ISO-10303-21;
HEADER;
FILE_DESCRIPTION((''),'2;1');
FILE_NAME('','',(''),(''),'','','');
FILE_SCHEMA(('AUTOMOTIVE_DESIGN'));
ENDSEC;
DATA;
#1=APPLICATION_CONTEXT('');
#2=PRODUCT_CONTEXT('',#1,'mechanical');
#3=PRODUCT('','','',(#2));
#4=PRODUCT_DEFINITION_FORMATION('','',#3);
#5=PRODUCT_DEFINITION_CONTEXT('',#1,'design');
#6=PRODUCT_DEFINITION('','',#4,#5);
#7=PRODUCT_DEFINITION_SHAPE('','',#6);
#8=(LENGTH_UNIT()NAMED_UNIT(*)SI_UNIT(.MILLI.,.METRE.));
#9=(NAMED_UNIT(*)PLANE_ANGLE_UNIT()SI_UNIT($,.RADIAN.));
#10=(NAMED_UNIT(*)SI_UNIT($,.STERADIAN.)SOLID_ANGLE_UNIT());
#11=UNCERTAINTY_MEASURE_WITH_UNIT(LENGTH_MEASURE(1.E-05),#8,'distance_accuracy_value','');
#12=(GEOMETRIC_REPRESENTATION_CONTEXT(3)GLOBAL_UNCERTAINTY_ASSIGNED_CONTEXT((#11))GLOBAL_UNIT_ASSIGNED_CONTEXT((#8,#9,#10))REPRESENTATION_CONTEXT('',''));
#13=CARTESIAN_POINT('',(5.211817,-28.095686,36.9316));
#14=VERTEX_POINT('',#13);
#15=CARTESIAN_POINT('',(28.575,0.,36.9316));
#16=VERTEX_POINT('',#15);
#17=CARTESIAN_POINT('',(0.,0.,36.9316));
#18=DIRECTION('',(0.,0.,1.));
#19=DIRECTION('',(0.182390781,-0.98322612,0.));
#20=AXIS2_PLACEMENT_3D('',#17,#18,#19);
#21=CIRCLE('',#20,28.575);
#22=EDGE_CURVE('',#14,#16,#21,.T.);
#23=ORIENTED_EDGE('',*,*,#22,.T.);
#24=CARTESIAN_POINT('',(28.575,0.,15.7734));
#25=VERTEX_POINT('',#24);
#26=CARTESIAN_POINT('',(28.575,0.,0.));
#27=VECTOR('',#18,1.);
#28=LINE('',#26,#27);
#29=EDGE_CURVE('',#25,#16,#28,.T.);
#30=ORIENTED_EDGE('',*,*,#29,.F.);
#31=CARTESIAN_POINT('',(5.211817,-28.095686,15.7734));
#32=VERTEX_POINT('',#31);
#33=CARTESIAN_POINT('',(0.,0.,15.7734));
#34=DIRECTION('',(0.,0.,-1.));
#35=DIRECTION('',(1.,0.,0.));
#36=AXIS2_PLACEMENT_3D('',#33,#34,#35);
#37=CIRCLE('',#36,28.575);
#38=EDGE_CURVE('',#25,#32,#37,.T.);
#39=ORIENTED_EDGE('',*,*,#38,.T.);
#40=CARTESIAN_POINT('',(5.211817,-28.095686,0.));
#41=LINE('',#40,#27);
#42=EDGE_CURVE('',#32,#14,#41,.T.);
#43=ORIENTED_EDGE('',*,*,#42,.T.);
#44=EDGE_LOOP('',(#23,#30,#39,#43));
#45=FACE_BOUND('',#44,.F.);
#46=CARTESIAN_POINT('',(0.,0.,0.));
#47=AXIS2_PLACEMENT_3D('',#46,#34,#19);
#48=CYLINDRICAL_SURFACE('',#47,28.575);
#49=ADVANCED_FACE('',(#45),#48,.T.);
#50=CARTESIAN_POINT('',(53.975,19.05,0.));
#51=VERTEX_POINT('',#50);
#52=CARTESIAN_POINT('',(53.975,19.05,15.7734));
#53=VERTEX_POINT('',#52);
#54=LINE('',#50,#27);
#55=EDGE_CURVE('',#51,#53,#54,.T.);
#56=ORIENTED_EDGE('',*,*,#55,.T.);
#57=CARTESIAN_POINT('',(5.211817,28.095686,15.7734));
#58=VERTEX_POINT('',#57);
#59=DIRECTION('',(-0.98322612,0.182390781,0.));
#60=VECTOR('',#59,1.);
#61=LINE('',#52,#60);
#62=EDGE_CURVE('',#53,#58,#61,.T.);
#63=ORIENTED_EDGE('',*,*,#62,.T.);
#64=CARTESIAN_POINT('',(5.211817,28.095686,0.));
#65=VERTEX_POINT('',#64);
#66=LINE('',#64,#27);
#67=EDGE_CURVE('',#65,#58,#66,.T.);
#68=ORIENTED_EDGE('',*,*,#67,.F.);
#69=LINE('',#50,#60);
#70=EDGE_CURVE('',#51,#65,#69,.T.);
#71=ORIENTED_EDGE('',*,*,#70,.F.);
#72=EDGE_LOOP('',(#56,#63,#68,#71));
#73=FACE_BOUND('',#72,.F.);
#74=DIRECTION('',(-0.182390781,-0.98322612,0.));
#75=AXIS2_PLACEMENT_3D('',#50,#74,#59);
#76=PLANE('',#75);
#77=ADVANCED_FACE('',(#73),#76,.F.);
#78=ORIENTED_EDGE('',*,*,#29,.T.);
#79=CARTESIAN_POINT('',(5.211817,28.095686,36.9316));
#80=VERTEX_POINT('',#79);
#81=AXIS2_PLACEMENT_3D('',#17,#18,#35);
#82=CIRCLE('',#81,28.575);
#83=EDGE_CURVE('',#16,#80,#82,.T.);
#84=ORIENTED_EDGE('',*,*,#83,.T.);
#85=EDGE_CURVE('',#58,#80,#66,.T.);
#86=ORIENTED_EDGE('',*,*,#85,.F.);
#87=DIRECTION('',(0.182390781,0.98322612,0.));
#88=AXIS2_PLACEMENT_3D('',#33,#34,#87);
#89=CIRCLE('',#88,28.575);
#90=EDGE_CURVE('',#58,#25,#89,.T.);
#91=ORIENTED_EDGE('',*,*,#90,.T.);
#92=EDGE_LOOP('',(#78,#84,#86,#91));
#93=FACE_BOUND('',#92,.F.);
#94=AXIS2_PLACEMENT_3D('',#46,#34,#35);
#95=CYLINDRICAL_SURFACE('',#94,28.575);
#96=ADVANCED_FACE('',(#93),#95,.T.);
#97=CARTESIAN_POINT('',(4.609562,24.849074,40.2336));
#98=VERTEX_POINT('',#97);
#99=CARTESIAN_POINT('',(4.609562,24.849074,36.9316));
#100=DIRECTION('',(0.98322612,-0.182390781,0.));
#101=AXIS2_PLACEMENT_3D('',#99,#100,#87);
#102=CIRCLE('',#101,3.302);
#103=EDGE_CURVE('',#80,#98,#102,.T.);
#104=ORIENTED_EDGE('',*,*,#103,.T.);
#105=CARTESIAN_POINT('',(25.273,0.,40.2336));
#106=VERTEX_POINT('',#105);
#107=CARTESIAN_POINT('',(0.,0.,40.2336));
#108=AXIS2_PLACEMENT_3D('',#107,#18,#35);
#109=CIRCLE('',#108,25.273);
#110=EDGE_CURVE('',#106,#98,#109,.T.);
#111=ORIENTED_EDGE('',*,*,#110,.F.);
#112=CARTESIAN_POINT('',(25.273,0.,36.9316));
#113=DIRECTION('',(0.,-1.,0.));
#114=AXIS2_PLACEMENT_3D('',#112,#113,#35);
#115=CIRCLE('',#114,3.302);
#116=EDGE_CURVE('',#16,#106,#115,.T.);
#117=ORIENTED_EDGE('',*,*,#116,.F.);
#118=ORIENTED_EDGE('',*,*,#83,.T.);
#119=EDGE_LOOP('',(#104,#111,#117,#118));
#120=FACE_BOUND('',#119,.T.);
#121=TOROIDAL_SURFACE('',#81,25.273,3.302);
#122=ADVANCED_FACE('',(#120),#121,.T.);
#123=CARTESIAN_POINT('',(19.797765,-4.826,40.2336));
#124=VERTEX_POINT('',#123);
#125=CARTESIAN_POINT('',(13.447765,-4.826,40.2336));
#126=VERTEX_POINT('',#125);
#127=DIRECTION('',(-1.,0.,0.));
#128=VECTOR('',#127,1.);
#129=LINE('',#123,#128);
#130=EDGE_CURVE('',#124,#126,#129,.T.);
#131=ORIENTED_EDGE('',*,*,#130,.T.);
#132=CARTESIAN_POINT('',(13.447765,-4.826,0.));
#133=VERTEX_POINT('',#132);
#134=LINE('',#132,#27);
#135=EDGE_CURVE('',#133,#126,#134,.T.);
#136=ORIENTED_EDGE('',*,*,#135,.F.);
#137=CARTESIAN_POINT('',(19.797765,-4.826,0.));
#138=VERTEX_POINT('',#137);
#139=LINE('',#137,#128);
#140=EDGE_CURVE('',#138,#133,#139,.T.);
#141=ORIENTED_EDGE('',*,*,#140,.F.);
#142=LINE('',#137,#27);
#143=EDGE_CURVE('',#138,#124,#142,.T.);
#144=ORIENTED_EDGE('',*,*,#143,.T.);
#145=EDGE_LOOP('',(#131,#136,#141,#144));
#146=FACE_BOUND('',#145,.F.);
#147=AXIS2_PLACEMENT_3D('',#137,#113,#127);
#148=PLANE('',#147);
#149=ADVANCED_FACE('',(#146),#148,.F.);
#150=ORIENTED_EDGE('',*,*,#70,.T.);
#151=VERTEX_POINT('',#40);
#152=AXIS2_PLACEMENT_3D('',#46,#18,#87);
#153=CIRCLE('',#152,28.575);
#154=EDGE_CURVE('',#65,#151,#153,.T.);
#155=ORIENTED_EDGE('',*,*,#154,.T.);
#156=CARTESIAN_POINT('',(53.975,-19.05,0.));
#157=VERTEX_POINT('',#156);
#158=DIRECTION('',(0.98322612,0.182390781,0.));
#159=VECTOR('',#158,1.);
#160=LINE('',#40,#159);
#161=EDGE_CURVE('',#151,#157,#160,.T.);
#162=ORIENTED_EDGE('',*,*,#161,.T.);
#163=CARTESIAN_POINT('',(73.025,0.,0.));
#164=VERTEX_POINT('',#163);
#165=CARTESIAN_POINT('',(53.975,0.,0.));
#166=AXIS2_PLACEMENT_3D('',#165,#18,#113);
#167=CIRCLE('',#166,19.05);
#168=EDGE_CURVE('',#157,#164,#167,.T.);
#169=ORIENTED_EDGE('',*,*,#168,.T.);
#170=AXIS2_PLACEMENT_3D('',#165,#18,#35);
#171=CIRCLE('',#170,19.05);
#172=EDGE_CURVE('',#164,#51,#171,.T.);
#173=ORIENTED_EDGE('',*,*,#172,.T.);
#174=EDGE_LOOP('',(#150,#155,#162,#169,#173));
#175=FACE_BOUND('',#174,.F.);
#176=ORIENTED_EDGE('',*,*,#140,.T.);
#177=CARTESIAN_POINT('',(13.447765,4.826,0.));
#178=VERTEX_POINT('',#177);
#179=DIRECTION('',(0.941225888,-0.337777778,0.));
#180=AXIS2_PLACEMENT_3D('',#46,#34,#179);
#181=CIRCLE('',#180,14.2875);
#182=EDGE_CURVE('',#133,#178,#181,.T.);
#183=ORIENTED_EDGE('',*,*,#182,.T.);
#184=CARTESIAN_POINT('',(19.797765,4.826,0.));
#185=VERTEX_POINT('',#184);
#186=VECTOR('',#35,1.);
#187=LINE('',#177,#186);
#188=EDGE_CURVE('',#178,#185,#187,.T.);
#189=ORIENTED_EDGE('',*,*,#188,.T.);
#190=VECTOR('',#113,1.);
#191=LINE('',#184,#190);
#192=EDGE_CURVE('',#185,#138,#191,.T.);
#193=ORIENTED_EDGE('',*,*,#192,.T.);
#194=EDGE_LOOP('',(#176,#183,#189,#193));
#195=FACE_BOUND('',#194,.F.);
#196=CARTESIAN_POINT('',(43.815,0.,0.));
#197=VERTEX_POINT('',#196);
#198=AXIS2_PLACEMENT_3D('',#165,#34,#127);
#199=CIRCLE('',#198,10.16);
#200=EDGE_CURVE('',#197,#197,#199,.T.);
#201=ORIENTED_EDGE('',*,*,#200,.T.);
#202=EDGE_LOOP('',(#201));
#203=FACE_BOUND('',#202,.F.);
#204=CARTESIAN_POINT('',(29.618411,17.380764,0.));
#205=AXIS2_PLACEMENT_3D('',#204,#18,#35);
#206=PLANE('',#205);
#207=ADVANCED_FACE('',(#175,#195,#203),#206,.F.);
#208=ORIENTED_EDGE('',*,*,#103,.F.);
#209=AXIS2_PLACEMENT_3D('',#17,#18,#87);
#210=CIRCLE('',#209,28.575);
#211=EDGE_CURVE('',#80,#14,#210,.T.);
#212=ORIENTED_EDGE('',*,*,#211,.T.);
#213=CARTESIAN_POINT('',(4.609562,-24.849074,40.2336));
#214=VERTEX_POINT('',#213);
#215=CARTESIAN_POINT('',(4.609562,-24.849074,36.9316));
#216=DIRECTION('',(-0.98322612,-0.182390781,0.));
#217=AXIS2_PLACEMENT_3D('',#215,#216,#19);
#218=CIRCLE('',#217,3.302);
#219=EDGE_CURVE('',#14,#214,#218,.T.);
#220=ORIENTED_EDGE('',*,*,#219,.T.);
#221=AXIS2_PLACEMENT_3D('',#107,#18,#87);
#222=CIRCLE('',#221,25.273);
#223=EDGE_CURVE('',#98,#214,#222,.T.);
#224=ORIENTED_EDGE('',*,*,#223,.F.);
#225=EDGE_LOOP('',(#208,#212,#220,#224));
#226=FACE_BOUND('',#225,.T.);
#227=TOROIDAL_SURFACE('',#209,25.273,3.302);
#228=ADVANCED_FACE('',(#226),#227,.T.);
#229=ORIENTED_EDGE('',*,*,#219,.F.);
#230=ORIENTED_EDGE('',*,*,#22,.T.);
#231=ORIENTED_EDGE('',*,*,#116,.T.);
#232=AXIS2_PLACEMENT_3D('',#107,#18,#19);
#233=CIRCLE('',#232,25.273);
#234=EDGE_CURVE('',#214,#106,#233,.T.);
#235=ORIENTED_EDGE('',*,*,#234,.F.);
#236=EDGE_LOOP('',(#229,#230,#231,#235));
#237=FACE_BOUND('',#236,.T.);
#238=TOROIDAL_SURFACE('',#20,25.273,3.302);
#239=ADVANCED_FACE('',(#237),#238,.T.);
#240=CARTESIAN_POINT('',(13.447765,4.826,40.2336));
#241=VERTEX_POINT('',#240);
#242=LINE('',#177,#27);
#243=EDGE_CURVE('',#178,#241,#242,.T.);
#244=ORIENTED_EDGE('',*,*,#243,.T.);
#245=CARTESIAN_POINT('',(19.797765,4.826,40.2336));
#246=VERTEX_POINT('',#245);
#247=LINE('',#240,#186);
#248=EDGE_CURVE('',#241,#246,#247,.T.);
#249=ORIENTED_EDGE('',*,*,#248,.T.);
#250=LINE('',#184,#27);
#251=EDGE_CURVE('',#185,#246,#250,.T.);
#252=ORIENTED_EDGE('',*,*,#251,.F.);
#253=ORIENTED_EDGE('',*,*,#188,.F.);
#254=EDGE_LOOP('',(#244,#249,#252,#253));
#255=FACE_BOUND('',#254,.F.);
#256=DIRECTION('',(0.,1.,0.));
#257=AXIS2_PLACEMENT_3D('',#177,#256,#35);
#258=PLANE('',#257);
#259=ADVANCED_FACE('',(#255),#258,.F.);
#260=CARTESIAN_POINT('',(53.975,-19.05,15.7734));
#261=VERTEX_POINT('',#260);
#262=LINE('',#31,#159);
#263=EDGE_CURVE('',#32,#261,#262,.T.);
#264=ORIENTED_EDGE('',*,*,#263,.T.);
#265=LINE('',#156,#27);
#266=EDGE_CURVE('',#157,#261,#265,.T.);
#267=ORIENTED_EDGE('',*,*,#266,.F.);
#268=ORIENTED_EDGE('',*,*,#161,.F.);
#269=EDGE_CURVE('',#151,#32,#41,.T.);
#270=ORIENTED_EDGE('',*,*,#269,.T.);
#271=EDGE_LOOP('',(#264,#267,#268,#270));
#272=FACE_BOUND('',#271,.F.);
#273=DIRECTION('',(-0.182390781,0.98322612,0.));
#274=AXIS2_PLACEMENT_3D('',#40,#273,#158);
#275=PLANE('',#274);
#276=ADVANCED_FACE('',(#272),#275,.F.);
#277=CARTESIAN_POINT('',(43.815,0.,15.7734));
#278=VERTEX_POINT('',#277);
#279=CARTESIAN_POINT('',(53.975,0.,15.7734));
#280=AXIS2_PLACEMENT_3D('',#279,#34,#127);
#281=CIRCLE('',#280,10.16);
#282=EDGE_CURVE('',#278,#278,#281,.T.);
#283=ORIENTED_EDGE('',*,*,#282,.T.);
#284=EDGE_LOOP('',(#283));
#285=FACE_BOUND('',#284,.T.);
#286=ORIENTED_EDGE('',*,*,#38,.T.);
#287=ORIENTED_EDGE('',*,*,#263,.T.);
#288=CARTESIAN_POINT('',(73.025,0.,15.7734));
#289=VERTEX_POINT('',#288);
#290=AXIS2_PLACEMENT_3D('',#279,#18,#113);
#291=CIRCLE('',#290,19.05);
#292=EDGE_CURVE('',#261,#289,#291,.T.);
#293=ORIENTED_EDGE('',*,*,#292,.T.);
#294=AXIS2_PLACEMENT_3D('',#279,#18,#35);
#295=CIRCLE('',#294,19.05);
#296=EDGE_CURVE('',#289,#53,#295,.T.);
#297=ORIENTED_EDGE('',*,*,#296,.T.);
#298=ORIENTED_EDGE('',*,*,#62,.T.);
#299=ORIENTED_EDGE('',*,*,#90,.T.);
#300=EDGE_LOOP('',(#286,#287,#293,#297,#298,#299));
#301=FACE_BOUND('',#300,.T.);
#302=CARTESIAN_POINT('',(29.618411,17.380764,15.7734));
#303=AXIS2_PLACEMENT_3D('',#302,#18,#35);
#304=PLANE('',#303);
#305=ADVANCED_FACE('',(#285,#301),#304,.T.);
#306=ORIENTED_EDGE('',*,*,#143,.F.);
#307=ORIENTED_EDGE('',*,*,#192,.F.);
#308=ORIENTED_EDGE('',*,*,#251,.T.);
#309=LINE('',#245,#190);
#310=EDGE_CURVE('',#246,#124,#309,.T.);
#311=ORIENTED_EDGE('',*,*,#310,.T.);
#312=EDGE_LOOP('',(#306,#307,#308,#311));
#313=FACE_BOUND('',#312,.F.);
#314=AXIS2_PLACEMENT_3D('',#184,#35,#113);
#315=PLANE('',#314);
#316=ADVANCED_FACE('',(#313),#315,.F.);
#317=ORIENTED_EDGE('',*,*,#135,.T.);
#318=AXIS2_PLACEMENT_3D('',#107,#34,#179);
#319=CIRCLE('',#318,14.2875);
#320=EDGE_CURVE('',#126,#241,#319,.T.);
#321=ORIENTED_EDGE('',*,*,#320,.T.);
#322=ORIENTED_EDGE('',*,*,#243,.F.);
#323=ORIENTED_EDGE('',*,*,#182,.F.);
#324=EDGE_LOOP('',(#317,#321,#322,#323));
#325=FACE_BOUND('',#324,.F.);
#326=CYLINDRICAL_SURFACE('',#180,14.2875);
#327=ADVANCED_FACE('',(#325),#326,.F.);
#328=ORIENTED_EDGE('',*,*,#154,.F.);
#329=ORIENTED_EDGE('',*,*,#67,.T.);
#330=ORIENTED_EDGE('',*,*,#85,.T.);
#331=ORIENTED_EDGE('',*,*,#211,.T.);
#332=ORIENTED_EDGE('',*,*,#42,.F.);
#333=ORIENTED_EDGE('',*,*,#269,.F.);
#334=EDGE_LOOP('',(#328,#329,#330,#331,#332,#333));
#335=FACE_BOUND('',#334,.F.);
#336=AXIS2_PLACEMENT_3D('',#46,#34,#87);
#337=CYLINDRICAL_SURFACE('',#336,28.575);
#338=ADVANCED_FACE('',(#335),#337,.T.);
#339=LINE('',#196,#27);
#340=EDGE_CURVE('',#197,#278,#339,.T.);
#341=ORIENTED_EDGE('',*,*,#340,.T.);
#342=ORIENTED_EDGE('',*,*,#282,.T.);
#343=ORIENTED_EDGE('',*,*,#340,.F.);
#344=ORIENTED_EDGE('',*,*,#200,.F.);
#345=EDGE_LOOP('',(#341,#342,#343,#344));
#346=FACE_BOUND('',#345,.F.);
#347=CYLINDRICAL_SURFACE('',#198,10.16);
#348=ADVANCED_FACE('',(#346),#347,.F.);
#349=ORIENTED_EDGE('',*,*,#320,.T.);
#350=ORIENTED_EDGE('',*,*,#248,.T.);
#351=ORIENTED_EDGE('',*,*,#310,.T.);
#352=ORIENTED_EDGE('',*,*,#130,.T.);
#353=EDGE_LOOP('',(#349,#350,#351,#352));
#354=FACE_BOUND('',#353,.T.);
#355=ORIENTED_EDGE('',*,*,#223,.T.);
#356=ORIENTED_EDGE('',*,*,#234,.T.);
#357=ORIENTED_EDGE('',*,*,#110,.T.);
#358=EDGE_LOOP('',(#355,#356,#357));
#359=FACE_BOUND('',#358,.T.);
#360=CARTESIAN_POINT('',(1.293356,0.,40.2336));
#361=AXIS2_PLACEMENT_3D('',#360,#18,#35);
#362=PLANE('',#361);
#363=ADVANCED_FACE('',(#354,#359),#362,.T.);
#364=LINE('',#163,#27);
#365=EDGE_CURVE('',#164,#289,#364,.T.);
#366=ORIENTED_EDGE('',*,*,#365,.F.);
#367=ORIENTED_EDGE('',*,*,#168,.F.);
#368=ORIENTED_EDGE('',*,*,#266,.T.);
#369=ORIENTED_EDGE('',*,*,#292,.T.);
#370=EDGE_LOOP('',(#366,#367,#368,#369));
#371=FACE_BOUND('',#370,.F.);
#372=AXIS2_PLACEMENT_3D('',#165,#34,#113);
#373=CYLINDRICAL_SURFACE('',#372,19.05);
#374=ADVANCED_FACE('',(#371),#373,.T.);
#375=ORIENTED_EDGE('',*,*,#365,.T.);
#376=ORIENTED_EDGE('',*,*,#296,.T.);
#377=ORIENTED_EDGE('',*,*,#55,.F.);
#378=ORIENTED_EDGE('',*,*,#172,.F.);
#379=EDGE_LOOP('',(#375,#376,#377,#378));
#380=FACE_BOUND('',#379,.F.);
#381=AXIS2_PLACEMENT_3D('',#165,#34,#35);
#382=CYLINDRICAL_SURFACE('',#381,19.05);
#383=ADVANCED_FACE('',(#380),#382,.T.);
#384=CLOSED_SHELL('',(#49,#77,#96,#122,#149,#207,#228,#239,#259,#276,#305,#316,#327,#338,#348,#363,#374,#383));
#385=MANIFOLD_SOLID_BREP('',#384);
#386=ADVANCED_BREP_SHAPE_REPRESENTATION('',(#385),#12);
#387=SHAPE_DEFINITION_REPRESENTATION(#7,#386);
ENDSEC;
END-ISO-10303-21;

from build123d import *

# Parameters (mm, degrees)
F1_DEPTH = 40.2336
F2_DEPTH = 15.7734
F3_R     = 3.302


# Not quite as in the source:
# - a feature names something its author has since deleted; it is built from what else it names


with BuildPart() as f1:
    # F0 (on Top) → F1 (new body)
    with BuildSketch(Plane.XY):
        with BuildLine():
            ThreePointArc((5.2118165727, -28.0956863773), (21.9710978739, -18.2702348977), (28.575, 0))
            ThreePointArc((28.575, 0), (21.9710978739, 18.2702348977), (5.2118165727, 28.0956863773))
            ThreePointArc((5.2118165727, 28.0956863773), (-28.575, 0), (5.2118165727, -28.0956863773))
        make_face()
        with BuildLine():
            ThreePointArc((13.4477648793, -4.826), (-14.2875, 0), (13.4477648793, 4.826))
            Line((13.4477648793, 4.826), (19.7977648793, 4.826))
            Line((19.7977648793, 4.826), (19.7977648793, 0))
            Line((19.7977648793, 0), (19.7977648793, -4.826))
            Line((19.7977648793, -4.826), (13.4477648793, -4.826))
        make_face(mode=Mode.SUBTRACT)
    extrude(amount=F1_DEPTH)

    # F0 (on Top) → F2 (join)
    with BuildSketch(Plane.XY):
        with BuildLine():
            ThreePointArc((5.2118165727, 28.0956863773), (21.9710978739, 18.2702348977), (28.575, 0))
            Line((28.575, 0), (34.925, 0))
            ThreePointArc((34.925, 0), (40.5046158184, 13.4703841816), (53.975, 19.05))
            Line((53.975, 19.05), (5.2118165727, 28.0956863773))
        make_face()
        with BuildLine():
            Line((34.925, 0), (28.575, 0))
            ThreePointArc((28.575, 0), (21.9710978739, -18.2702348977), (5.2118165727, -28.0956863773))
            Line((5.2118165727, -28.0956863773), (53.975, -19.05))
            ThreePointArc((53.975, -19.05), (40.5046158184, -13.4703841816), (34.925, 0))
        make_face()
        with BuildLine():
            ThreePointArc((53.975, 19.05), (40.5046158184, 13.4703841816), (34.925, 0))
            ThreePointArc((34.925, 0), (40.5046158184, -13.4703841816), (53.975, -19.05))
            ThreePointArc((53.975, -19.05), (67.4453841816, -13.4703841816), (73.025, 0))
            ThreePointArc((73.025, 0), (67.4453841816, 13.4703841816), (53.975, 19.05))
        make_face()
        with BuildLine():
            ThreePointArc((64.135, 0), (53.975, -10.16), (43.815, 0))
            ThreePointArc((43.815, 0), (53.975, 10.16), (64.135, 0))
        make_face(mode=Mode.SUBTRACT)
    extrude(amount=F2_DEPTH)

    # F3
    f3_edges = [f1.edges().sort_by_distance(p)[0] for p in [
        (-5.211817, 28.095686, 40.2336),
    ]]
    fillet(f3_edges, radius=F3_R)


solid = f1.part
